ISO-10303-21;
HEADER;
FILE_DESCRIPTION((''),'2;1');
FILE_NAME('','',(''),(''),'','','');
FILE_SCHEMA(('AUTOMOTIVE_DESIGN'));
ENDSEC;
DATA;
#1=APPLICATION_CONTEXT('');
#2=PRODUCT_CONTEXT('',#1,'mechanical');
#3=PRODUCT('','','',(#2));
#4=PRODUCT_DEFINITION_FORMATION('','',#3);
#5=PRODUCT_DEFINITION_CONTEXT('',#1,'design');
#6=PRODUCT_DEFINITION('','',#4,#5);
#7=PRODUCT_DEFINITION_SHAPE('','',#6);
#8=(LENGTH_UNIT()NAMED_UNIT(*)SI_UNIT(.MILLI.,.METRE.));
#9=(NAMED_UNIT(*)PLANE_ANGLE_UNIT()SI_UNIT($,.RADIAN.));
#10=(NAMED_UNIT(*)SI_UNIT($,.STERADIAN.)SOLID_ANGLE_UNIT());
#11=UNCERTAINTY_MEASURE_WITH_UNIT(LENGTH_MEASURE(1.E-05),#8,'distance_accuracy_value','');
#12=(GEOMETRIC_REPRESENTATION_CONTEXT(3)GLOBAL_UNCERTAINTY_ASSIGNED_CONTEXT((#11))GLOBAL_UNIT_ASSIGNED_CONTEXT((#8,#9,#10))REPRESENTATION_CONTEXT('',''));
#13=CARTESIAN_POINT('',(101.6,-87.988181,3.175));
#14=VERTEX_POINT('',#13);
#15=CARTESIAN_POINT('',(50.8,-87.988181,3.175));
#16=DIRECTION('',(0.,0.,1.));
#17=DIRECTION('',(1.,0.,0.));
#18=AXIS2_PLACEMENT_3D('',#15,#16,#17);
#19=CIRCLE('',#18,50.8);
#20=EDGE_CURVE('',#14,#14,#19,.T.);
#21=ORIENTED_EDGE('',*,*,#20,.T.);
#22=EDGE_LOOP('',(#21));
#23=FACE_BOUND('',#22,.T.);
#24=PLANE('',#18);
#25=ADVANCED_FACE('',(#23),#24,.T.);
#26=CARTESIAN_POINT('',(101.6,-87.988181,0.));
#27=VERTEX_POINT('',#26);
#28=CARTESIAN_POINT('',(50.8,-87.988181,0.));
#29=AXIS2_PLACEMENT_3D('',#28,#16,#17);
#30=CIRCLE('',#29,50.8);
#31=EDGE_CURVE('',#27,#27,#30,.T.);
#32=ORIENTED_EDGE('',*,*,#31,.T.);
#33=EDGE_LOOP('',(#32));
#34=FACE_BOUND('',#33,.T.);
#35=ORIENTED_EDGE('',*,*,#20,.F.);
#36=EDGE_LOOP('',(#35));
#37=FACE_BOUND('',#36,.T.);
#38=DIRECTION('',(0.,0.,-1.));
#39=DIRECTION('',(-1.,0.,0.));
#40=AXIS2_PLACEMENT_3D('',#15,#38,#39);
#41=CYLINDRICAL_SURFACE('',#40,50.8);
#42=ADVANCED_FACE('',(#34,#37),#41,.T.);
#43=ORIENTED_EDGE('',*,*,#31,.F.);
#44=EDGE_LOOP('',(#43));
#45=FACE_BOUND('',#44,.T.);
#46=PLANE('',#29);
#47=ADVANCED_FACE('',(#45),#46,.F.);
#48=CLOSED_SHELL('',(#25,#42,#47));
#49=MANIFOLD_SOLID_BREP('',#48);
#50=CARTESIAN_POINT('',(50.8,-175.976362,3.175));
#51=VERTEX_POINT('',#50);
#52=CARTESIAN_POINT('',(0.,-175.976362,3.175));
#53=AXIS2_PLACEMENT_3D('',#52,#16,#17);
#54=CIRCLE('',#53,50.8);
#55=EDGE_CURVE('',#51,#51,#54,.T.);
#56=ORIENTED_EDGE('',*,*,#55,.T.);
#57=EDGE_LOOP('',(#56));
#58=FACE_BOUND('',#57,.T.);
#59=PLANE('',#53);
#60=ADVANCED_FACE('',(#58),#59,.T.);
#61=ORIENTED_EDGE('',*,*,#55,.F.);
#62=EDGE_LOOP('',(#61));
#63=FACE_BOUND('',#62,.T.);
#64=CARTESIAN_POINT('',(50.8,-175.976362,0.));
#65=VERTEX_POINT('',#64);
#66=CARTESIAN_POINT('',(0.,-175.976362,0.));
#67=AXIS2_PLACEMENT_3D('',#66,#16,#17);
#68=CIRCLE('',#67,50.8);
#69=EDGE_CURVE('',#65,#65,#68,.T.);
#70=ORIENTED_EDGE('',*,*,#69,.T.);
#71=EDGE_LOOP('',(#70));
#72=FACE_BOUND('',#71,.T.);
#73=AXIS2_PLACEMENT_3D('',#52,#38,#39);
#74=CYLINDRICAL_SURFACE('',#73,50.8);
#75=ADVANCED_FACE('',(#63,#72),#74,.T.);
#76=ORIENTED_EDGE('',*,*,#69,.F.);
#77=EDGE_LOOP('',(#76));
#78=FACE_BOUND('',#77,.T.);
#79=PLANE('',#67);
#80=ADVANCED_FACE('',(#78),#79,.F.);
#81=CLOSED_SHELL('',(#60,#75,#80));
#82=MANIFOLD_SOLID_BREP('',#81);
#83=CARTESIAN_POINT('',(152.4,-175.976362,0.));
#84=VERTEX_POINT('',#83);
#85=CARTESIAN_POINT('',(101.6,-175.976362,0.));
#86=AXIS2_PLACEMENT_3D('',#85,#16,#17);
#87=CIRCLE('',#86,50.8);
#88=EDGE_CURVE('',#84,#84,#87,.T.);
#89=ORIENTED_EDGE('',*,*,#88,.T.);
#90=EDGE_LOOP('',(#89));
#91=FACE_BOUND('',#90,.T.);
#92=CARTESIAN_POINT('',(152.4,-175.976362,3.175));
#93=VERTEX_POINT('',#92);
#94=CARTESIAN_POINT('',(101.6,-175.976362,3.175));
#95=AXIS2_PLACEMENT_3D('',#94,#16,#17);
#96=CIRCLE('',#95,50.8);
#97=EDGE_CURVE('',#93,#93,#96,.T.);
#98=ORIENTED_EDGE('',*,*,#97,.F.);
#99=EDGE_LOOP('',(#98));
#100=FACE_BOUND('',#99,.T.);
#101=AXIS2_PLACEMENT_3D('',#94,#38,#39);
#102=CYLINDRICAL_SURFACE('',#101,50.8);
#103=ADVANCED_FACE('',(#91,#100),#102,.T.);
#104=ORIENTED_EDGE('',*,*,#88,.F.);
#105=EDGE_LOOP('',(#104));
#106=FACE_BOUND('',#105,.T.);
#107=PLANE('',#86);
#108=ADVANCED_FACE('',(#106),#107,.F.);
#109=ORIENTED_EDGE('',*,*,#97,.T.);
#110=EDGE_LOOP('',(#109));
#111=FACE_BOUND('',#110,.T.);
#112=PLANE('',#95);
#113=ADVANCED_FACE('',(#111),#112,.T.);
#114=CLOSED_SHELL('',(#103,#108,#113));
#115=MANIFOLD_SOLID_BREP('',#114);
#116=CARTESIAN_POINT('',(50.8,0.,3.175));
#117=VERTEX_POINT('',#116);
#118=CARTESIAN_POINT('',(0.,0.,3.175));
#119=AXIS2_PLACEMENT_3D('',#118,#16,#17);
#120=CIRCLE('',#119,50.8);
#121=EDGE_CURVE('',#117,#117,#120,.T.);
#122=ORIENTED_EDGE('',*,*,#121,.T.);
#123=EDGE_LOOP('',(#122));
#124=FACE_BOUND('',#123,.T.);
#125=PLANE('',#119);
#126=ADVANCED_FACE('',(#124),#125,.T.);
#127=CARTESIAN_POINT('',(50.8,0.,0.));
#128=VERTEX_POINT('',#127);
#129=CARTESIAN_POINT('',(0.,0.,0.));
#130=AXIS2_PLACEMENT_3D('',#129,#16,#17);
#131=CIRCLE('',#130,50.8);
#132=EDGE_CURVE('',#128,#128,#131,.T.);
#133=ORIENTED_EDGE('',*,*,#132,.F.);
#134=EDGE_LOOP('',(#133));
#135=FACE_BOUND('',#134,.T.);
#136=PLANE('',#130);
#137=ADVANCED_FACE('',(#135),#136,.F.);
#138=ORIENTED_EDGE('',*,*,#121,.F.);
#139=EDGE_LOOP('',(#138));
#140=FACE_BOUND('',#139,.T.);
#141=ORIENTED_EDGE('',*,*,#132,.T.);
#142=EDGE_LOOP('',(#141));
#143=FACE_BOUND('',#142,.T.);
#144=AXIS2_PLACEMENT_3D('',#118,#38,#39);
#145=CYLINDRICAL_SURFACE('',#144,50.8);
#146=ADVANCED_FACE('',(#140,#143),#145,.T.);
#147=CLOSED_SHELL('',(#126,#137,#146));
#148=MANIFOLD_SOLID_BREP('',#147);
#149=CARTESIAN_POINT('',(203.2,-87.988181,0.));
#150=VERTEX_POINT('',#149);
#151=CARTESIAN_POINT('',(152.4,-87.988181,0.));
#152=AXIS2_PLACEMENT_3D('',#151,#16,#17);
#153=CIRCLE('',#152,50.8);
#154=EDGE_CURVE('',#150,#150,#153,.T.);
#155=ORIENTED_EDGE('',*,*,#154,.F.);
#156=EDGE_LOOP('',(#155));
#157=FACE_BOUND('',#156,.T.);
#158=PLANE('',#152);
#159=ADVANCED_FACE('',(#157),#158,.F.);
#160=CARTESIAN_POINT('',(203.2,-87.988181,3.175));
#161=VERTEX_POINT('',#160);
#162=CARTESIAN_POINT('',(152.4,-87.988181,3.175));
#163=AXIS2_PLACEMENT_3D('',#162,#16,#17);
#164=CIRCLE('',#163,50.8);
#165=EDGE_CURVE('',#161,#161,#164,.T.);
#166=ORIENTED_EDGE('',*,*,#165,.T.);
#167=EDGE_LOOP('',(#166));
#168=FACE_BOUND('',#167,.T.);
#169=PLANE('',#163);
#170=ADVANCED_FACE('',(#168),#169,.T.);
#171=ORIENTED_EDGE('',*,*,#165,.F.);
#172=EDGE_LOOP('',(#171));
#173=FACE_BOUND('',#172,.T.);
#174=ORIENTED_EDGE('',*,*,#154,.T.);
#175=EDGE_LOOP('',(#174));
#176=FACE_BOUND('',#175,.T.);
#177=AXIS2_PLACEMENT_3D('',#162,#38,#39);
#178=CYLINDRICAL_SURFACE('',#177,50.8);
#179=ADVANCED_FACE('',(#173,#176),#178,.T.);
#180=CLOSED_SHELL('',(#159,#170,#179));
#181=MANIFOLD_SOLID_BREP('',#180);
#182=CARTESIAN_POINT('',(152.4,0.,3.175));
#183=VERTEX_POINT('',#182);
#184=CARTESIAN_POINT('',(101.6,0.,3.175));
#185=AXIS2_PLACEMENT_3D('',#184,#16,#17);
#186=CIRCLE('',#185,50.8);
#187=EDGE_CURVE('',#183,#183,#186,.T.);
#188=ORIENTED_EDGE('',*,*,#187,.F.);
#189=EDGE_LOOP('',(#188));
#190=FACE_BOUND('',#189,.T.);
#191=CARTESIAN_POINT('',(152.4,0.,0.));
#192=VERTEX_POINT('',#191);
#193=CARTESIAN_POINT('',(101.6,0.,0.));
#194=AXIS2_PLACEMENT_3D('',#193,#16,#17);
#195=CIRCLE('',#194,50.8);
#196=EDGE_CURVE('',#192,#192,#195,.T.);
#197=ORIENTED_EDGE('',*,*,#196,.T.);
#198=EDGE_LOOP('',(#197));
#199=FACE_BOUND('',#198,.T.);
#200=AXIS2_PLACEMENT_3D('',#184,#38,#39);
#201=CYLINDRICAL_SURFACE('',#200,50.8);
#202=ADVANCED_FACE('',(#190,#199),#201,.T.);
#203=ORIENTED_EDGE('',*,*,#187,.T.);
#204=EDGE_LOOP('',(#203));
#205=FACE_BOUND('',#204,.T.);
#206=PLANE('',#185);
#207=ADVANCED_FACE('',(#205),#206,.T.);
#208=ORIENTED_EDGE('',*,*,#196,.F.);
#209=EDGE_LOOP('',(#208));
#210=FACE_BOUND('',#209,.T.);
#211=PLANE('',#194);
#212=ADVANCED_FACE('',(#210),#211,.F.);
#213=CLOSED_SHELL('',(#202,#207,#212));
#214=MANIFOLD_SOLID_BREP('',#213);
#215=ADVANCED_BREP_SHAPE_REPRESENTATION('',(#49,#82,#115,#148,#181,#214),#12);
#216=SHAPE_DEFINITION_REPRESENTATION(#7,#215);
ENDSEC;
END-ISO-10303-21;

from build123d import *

# Parameters (mm, degrees)
SKETCH1_R           = 50.8
BOSS_EXTRUDE1_DEPTH = 3.175
FILL_PATTERN1_DEPTH = 3.175


# Read off the part's stored shape, not the designer's step: Fill Pattern1
with BuildPart() as part:
    # Sketch1 → Boss-Extrude1 (new body)
    with BuildSketch(Plane.XY):
        Circle(SKETCH1_R)
    extrude(amount=BOSS_EXTRUDE1_DEPTH)


with BuildPart() as body_2:
    # Fill Pattern1 outline → Fill Pattern1 (new body)
    with BuildSketch(Plane.XY):
        with BuildLine():
            ThreePointArc((127.000000809, -131.982272003), (203.2, -87.988180558), (127.000000001, -43.994090511))
            ThreePointArc((127.000000001, -43.994090511), (108.405909488, -62.588181024), (101.6, -87.988181024))
            ThreePointArc((101.6, -87.988181024), (108.405909721, -113.388181428), (127.000000809, -131.982272003))
        make_face()
        with BuildLine():
            ThreePointArc((76.2, -43.994090512), (101.6, -50.8), (127.000000001, -43.994090512))
            ThreePointArc((127.000000001, -43.994090512), (101.6, 50.8), (76.2, -43.994090512))
        make_face()
        with BuildLine():
            ThreePointArc((50.8, -175.976362049), (126.999999596, -219.970452795), (127.000000809, -131.982272004))
            ThreePointArc((127.000000809, -131.982272004), (101.600000016, -125.176362049), (76.19999922, -131.982271987))
            ThreePointArc((76.19999922, -131.982271987), (57.605909262, -150.576362439), (50.8, -175.976362049))
        make_face()
        with BuildLine():
            ThreePointArc((76.199999219, -131.982271987), (94.794090287, -113.388181414), (101.6, -87.988181024))
            ThreePointArc((101.6, -87.988181024), (94.794090512, -62.588181024), (76.2, -43.994090512))
            ThreePointArc((76.2, -43.994090512), (6.805909644, -62.588180753), (25.399999458, -131.982271224))
            ThreePointArc((25.399999458, -131.982271224), (50.799999237, -138.788181024), (76.199999219, -131.982271987))
        make_face()
        with BuildLine():
            ThreePointArc((50.8, -175.976362049), (43.994090356, -150.576361778), (25.399999458, -131.982271224))
            ThreePointArc((25.399999458, -131.982271224), (-43.994090356, -201.37636232), (50.8, -175.976362049))
        make_face()
    extrude(amount=FILL_PATTERN1_DEPTH)


solid = Compound([part.part, body_2.part])
